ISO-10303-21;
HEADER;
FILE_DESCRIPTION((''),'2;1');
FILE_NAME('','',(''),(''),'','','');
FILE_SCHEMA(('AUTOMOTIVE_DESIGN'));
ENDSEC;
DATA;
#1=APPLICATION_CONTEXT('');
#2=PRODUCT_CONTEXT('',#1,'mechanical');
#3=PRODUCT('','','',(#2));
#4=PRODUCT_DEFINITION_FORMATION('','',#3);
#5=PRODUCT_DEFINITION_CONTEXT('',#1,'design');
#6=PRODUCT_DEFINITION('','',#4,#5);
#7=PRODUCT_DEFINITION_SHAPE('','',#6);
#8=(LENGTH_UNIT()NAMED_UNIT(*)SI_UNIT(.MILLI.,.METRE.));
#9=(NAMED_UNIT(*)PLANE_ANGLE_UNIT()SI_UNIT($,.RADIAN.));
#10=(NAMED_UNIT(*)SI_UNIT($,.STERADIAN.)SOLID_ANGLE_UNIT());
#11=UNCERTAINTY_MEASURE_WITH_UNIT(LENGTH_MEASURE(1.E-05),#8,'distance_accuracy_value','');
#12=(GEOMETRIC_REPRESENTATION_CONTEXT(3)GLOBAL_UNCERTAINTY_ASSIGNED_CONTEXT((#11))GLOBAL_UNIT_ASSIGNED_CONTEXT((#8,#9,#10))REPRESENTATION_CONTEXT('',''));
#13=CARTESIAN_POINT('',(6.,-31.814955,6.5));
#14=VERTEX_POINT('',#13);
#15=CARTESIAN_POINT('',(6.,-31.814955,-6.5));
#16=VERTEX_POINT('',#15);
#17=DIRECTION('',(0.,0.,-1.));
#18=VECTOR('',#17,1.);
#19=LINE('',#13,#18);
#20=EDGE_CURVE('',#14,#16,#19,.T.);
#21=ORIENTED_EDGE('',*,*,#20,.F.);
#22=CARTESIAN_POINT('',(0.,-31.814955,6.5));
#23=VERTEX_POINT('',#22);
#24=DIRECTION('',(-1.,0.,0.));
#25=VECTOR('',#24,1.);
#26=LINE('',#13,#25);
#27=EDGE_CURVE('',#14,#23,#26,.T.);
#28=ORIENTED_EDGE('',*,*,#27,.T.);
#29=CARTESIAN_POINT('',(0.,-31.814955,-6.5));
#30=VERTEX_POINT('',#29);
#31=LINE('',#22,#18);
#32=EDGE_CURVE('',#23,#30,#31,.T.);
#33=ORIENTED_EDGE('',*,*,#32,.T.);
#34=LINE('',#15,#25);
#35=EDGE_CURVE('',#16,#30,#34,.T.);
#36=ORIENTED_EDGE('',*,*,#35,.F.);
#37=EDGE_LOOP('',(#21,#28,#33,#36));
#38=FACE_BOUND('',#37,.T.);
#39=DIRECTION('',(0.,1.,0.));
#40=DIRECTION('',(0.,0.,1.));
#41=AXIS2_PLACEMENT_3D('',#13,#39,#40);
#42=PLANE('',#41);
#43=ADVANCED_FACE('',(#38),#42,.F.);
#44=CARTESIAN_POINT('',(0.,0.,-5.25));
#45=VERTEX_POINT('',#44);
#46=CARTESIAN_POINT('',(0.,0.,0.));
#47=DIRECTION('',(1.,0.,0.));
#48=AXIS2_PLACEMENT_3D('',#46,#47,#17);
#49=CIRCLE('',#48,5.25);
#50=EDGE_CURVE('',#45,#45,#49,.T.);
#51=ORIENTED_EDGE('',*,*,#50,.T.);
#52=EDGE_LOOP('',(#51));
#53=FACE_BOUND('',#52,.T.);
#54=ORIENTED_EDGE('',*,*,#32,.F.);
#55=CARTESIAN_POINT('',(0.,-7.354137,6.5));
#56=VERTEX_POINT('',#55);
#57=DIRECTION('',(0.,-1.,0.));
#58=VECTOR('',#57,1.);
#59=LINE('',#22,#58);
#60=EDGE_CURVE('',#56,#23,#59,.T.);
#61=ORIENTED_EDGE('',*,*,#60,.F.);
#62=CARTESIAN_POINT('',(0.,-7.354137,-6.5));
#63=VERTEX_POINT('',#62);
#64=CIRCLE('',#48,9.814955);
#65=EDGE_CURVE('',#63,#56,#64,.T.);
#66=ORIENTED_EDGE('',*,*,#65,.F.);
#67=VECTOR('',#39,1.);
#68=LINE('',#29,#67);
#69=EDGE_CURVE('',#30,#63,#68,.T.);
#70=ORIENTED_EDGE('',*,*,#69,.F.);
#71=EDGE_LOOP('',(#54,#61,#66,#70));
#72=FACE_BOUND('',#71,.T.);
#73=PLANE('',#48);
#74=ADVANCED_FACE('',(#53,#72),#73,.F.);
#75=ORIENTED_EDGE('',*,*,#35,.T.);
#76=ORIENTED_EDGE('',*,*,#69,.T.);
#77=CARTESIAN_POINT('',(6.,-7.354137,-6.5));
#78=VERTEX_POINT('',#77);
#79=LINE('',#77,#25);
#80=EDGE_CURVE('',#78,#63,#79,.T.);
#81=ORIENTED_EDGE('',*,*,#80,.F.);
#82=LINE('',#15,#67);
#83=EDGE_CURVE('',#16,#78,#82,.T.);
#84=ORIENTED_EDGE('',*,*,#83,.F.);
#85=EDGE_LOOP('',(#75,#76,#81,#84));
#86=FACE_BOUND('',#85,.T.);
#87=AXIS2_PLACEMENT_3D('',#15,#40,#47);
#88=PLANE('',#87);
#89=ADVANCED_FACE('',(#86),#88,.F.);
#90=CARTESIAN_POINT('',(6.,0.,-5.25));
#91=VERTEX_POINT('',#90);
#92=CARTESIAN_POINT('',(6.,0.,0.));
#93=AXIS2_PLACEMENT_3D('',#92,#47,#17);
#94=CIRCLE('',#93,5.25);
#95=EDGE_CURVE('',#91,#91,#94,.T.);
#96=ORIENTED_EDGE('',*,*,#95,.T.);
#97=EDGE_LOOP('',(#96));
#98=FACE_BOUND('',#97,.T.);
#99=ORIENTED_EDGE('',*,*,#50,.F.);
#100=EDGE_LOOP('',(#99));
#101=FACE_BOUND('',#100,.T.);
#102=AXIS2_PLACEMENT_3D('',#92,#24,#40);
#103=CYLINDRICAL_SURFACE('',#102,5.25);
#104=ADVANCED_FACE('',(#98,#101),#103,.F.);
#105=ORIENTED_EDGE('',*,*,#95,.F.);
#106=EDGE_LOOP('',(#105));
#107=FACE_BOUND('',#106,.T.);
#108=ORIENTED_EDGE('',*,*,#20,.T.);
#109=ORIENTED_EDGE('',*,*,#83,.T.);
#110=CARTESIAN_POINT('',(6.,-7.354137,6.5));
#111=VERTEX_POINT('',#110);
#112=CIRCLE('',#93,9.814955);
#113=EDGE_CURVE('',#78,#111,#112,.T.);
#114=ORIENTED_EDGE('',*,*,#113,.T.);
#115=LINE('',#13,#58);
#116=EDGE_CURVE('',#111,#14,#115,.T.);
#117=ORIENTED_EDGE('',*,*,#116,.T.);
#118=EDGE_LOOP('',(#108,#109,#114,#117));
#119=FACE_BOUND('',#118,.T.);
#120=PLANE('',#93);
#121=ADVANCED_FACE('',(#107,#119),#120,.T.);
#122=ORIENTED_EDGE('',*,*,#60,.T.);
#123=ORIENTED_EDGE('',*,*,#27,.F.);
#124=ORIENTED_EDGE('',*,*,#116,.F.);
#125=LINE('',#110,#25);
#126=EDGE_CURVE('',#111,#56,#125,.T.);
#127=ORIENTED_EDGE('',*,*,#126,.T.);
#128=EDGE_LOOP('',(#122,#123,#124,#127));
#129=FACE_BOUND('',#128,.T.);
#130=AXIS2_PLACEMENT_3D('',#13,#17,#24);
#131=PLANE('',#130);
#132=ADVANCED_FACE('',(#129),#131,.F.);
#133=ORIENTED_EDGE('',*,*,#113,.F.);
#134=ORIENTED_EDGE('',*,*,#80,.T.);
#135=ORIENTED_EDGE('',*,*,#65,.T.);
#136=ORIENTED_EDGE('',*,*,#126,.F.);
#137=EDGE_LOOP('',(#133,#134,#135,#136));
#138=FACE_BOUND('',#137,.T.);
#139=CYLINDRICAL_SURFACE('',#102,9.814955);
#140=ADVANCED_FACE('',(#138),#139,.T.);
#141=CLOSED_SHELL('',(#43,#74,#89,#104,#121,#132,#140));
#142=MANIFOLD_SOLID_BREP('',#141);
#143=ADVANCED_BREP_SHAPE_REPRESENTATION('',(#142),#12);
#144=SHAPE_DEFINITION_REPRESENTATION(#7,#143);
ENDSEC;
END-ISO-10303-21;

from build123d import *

# Parameters (mm, degrees)
SKETCH_1_R             = 5.25
SM_BASE_FLANGE_1_DEPTH = 6


# Sheet-metal steps are written as plain solids
with BuildPart() as part:
    # Sketch 1 → Базовая кромка1 (new body)
    with BuildSketch(Plane(origin=(0, 0, 0), x_dir=(0, 0, -1), z_dir=(1, 0, 0))):
        with BuildLine():
            Line((-6.5, -31.814954576), (6.5, -31.814954576))
            Line((6.5, -31.814954576), (6.5, -7.354137158))
            ThreePointArc((6.5, -7.354137158), (0, 9.814954576), (-6.5, -7.354137158))
            Line((-6.5, -7.354137158), (-6.5, -31.814954576))
        make_face()
        Circle(SKETCH_1_R, mode=Mode.SUBTRACT)
    extrude(amount=SM_BASE_FLANGE_1_DEPTH)


solid = part.part
